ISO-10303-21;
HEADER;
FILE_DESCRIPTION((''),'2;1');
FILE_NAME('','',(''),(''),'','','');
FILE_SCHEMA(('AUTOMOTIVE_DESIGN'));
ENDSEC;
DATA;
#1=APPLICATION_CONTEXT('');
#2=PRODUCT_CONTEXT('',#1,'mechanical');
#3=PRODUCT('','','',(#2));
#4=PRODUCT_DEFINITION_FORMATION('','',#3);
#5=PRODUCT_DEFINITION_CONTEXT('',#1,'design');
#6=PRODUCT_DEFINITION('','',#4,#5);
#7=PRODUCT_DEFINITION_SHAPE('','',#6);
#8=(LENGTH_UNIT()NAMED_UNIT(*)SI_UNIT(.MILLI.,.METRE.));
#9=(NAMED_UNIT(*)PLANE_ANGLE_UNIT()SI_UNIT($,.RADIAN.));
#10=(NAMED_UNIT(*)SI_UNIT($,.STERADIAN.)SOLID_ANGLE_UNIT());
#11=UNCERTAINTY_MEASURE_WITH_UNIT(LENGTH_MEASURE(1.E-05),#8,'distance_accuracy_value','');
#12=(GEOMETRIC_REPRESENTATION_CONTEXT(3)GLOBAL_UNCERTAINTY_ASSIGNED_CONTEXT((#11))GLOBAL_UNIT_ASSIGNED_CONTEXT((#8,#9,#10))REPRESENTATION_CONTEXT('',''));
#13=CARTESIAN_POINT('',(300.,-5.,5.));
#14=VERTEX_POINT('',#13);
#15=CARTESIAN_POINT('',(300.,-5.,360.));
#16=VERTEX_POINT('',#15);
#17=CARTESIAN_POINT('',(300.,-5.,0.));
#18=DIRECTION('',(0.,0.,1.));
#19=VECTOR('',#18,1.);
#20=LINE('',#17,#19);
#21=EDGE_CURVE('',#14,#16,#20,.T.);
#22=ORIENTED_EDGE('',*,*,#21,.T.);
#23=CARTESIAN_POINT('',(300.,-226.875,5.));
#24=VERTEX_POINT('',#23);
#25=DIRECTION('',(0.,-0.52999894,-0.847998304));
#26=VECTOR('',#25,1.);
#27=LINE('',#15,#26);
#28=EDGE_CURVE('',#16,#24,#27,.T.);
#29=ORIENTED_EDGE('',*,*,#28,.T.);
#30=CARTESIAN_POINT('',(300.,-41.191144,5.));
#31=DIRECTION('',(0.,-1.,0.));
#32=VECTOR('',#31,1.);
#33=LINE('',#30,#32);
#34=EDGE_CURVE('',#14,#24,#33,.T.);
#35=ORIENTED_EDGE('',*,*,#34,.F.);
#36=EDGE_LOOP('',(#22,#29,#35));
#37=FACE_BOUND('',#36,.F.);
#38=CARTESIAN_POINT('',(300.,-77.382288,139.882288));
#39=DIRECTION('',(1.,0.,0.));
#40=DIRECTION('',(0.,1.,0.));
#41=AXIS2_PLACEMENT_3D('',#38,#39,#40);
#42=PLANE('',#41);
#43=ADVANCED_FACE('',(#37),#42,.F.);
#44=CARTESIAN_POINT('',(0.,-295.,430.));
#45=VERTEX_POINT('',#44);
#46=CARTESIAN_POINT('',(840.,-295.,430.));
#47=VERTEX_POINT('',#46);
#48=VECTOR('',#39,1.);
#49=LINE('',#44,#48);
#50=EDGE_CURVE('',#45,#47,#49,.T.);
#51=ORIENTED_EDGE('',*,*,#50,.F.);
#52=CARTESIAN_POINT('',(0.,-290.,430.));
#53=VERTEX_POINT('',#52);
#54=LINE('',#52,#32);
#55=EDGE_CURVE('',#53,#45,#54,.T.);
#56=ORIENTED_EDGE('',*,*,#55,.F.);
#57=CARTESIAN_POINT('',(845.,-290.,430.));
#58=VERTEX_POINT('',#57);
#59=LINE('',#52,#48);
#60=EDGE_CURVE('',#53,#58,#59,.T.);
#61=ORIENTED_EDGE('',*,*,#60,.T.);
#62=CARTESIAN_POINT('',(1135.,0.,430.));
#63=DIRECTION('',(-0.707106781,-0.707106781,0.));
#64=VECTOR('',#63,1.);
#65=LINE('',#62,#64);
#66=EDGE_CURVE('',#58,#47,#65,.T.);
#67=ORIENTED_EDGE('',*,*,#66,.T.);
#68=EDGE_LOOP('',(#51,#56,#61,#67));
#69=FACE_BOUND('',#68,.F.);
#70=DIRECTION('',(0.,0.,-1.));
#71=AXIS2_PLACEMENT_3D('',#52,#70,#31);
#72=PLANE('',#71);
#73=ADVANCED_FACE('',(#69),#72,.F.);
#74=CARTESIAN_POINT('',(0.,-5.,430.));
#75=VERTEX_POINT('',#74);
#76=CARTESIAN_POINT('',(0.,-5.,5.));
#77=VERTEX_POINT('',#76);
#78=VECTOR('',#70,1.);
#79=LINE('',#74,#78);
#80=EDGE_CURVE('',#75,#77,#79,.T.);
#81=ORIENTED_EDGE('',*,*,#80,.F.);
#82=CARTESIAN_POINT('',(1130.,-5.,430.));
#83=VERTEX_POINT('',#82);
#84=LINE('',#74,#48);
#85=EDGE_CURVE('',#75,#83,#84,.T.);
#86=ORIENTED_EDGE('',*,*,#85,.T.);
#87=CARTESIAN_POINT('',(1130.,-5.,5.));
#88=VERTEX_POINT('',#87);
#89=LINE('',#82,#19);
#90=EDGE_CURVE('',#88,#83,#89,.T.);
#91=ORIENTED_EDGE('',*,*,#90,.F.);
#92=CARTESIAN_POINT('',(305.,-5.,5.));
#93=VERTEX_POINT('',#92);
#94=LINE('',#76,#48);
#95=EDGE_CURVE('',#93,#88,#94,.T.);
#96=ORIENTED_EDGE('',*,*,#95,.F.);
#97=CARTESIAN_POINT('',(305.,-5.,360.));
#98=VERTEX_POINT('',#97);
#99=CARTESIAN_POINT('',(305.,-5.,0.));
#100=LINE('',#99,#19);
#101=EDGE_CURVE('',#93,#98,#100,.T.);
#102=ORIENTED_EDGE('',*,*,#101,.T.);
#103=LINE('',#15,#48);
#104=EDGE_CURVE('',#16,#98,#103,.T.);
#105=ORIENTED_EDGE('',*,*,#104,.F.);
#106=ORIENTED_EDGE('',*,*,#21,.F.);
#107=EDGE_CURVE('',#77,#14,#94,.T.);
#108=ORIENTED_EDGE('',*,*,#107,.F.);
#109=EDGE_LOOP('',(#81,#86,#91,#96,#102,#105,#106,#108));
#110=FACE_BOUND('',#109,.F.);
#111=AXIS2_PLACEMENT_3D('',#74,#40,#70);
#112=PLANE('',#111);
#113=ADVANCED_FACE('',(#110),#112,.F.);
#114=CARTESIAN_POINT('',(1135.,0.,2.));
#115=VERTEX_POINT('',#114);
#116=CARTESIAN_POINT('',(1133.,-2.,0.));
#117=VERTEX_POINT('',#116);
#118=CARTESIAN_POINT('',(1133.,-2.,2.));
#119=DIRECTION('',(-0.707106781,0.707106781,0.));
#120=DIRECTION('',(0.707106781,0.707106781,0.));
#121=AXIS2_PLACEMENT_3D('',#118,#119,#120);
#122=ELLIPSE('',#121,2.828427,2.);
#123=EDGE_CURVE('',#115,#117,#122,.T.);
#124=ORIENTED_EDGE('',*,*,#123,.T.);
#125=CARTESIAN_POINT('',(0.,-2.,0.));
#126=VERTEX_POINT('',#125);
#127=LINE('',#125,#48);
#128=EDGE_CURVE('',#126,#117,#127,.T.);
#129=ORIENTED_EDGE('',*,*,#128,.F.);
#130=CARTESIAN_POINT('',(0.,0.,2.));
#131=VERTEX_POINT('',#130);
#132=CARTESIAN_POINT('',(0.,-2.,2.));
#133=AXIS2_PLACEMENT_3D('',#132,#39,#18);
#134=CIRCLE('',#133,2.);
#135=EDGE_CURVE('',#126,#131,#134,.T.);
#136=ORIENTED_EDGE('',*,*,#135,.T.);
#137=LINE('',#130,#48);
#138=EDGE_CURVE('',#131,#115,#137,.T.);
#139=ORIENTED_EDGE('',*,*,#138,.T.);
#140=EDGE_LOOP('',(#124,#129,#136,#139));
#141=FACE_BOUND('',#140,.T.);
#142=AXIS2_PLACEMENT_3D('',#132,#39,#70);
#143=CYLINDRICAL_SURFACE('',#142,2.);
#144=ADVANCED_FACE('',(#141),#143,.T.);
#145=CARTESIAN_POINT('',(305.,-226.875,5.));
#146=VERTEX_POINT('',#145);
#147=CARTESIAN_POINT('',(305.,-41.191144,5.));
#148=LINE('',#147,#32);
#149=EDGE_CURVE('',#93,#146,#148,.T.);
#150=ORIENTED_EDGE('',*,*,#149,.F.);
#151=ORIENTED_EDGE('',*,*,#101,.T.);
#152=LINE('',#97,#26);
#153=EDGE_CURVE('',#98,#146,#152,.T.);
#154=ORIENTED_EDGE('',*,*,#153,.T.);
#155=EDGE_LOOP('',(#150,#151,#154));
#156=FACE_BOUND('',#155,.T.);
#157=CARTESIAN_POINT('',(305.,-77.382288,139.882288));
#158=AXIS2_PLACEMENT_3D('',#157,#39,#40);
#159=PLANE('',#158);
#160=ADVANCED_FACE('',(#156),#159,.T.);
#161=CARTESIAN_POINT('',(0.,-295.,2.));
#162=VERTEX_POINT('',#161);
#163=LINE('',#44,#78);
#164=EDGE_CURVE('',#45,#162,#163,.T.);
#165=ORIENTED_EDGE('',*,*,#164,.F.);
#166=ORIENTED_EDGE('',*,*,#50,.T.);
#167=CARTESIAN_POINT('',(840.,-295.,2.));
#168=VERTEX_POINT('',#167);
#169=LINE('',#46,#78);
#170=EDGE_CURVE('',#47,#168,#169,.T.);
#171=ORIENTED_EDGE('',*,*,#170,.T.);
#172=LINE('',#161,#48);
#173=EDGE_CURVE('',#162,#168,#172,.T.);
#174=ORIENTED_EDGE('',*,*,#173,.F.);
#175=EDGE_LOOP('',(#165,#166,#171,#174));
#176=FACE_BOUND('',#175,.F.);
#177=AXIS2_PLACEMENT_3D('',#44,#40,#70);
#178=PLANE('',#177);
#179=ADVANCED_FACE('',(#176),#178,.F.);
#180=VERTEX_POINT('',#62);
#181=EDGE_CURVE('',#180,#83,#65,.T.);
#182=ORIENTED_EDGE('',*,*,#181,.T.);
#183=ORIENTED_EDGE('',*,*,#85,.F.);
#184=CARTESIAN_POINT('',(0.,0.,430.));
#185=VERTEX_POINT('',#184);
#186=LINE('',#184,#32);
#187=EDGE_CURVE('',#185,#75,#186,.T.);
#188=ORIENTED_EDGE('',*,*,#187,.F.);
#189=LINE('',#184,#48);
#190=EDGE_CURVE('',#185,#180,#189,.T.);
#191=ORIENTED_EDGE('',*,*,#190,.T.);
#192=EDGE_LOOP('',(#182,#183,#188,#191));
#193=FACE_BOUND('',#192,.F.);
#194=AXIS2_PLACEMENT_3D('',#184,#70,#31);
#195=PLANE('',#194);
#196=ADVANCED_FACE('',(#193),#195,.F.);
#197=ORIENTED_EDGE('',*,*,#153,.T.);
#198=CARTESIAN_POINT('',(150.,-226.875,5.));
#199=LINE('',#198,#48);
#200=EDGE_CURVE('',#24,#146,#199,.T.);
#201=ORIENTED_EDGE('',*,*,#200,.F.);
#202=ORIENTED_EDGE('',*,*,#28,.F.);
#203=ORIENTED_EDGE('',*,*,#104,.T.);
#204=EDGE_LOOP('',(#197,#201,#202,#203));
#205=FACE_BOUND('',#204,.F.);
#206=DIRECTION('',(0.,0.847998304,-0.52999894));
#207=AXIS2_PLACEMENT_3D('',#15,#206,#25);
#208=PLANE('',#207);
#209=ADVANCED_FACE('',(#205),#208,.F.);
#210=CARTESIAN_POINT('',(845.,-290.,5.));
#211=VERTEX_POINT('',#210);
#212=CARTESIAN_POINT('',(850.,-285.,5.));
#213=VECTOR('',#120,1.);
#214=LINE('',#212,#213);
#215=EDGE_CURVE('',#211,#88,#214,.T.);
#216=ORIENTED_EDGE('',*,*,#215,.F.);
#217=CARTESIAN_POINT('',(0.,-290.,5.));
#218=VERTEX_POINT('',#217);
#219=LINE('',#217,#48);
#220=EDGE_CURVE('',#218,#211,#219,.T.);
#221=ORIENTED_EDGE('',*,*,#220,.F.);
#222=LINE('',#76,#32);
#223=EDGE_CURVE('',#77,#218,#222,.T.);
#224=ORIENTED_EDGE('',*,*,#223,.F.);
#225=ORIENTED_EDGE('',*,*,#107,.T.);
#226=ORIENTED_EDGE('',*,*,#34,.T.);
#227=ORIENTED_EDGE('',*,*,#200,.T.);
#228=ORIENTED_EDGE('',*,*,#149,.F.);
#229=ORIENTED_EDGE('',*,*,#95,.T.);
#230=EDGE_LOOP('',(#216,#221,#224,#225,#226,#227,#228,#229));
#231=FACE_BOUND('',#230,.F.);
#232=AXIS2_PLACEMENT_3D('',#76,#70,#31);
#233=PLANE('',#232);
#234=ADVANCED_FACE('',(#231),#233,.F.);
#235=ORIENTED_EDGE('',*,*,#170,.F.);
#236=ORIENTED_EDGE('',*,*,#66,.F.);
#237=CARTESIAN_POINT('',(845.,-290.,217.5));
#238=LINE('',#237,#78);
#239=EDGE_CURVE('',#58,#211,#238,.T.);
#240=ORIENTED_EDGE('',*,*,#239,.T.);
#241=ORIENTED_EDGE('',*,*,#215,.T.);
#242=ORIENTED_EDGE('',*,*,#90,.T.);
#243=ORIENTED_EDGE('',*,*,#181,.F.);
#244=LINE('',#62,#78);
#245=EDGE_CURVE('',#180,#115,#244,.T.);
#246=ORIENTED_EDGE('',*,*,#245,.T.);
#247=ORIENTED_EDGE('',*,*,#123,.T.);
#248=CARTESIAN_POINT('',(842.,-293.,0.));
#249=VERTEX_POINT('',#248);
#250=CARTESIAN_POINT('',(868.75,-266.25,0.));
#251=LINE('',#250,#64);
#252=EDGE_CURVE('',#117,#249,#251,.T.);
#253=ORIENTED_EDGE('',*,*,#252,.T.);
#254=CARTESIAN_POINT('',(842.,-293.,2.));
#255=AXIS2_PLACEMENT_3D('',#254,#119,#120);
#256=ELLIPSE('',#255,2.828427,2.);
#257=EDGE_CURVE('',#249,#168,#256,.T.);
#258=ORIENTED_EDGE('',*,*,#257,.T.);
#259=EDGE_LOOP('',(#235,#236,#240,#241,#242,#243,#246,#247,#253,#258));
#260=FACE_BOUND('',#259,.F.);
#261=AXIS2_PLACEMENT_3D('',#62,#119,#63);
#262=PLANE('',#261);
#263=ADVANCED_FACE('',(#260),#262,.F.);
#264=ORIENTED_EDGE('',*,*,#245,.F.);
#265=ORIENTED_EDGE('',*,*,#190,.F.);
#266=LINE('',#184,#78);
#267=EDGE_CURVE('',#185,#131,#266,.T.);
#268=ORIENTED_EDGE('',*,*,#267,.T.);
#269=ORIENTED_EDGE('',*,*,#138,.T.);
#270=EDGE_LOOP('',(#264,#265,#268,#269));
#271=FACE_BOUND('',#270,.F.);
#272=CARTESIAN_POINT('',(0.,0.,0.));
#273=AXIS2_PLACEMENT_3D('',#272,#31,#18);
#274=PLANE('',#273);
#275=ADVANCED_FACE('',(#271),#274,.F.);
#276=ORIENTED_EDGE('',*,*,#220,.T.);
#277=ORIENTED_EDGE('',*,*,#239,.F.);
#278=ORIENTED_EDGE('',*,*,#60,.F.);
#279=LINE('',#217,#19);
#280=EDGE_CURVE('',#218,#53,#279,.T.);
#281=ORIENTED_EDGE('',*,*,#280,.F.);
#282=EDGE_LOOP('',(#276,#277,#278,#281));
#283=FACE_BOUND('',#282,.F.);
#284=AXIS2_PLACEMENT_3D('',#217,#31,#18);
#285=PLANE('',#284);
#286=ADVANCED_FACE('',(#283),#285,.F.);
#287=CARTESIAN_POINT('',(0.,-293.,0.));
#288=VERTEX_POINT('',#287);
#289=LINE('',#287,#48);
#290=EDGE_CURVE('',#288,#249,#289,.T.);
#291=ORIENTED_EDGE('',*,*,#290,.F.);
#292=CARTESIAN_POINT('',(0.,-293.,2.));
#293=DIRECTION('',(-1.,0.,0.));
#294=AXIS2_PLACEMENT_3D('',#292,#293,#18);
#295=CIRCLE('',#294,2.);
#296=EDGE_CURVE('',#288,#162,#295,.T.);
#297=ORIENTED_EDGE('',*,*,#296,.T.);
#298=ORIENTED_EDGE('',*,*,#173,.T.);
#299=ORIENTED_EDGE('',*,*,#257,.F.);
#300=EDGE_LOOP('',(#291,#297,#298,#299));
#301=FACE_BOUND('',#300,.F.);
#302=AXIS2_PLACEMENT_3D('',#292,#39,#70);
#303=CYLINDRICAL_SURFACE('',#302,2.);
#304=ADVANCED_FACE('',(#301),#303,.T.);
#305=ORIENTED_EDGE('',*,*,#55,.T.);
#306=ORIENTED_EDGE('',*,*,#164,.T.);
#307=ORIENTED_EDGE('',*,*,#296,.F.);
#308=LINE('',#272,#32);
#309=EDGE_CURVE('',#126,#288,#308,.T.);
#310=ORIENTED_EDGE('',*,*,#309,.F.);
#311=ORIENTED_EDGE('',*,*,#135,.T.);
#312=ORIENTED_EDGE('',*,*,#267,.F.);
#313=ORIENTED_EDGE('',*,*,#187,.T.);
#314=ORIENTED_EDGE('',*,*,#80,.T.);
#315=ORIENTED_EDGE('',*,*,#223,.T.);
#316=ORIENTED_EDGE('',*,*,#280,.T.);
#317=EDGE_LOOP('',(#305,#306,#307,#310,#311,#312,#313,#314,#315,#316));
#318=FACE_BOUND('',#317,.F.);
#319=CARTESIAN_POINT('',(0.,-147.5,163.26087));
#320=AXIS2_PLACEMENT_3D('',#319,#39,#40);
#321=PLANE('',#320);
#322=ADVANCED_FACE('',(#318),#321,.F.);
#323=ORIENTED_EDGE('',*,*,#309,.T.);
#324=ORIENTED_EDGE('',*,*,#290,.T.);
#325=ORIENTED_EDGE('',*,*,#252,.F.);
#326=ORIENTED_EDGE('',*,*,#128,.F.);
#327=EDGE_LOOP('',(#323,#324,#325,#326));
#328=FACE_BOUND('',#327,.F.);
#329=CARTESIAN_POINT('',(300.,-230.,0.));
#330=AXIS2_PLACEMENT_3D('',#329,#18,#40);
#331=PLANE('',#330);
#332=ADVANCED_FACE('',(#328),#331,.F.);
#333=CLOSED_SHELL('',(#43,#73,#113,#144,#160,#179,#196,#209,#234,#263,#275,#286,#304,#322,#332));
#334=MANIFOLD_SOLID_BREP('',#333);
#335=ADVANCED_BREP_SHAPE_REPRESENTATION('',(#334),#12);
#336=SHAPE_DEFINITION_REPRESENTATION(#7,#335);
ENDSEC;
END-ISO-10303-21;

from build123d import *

# Parameters (mm, degrees)
F1_DEPTH = 1200
F4_DEPTH = 5
F5_W     = 1200
F5_H     = 230
F6_DEPTH = 4
F7_R     = 2
F9_DEPTH = 430.001


# Not quite as in the source:
# - a feature names something its author has since deleted; it is built from what else it names


with BuildPart() as f1:
    # F0 (on Right) → F1 (new body)
    with BuildSketch(Plane.YZ):
        Polygon((-295, 0), (0, 0), (0, 430), (-5, 430), (-5, 5), (-290, 5), (-290, 430), (-295, 430), align=None)
    extrude(amount=F1_DEPTH)



with BuildPart() as f4:
    # F3 (on offset) → F4 (new body)
    with BuildSketch(Plane.YZ.offset(300)):
        Polygon((-230, 0), (-5, 0), (-5, 360), align=None)
    extrude(amount=F4_DEPTH)


with BuildPart() as f1_1:
    add(f1.part)

    add(f4.part)  # F6 merges F4
    # F5 (on Top) → F6 (join)
    with BuildSketch(Plane.XY):
        with Locations((600, -115)):
            Rectangle(F5_W, F5_H)
    extrude(amount=F6_DEPTH)

    # F7
    f7_edges = [f1_1.edges().sort_by_distance(p)[0] for p in [
        (600, 0, 0),
        (600, -295, 0),
    ]]
    fillet(f7_edges, radius=F7_R)

    # F8 (on face) → F9 (cut, through all)
    with BuildSketch(Plane.XY.offset(430)):
        Polygon((1135, 0), (840, -295), (1200, -295), (1200, 0), align=None)
    extrude(amount=-F9_DEPTH, mode=Mode.SUBTRACT)


solid = f1_1.part
